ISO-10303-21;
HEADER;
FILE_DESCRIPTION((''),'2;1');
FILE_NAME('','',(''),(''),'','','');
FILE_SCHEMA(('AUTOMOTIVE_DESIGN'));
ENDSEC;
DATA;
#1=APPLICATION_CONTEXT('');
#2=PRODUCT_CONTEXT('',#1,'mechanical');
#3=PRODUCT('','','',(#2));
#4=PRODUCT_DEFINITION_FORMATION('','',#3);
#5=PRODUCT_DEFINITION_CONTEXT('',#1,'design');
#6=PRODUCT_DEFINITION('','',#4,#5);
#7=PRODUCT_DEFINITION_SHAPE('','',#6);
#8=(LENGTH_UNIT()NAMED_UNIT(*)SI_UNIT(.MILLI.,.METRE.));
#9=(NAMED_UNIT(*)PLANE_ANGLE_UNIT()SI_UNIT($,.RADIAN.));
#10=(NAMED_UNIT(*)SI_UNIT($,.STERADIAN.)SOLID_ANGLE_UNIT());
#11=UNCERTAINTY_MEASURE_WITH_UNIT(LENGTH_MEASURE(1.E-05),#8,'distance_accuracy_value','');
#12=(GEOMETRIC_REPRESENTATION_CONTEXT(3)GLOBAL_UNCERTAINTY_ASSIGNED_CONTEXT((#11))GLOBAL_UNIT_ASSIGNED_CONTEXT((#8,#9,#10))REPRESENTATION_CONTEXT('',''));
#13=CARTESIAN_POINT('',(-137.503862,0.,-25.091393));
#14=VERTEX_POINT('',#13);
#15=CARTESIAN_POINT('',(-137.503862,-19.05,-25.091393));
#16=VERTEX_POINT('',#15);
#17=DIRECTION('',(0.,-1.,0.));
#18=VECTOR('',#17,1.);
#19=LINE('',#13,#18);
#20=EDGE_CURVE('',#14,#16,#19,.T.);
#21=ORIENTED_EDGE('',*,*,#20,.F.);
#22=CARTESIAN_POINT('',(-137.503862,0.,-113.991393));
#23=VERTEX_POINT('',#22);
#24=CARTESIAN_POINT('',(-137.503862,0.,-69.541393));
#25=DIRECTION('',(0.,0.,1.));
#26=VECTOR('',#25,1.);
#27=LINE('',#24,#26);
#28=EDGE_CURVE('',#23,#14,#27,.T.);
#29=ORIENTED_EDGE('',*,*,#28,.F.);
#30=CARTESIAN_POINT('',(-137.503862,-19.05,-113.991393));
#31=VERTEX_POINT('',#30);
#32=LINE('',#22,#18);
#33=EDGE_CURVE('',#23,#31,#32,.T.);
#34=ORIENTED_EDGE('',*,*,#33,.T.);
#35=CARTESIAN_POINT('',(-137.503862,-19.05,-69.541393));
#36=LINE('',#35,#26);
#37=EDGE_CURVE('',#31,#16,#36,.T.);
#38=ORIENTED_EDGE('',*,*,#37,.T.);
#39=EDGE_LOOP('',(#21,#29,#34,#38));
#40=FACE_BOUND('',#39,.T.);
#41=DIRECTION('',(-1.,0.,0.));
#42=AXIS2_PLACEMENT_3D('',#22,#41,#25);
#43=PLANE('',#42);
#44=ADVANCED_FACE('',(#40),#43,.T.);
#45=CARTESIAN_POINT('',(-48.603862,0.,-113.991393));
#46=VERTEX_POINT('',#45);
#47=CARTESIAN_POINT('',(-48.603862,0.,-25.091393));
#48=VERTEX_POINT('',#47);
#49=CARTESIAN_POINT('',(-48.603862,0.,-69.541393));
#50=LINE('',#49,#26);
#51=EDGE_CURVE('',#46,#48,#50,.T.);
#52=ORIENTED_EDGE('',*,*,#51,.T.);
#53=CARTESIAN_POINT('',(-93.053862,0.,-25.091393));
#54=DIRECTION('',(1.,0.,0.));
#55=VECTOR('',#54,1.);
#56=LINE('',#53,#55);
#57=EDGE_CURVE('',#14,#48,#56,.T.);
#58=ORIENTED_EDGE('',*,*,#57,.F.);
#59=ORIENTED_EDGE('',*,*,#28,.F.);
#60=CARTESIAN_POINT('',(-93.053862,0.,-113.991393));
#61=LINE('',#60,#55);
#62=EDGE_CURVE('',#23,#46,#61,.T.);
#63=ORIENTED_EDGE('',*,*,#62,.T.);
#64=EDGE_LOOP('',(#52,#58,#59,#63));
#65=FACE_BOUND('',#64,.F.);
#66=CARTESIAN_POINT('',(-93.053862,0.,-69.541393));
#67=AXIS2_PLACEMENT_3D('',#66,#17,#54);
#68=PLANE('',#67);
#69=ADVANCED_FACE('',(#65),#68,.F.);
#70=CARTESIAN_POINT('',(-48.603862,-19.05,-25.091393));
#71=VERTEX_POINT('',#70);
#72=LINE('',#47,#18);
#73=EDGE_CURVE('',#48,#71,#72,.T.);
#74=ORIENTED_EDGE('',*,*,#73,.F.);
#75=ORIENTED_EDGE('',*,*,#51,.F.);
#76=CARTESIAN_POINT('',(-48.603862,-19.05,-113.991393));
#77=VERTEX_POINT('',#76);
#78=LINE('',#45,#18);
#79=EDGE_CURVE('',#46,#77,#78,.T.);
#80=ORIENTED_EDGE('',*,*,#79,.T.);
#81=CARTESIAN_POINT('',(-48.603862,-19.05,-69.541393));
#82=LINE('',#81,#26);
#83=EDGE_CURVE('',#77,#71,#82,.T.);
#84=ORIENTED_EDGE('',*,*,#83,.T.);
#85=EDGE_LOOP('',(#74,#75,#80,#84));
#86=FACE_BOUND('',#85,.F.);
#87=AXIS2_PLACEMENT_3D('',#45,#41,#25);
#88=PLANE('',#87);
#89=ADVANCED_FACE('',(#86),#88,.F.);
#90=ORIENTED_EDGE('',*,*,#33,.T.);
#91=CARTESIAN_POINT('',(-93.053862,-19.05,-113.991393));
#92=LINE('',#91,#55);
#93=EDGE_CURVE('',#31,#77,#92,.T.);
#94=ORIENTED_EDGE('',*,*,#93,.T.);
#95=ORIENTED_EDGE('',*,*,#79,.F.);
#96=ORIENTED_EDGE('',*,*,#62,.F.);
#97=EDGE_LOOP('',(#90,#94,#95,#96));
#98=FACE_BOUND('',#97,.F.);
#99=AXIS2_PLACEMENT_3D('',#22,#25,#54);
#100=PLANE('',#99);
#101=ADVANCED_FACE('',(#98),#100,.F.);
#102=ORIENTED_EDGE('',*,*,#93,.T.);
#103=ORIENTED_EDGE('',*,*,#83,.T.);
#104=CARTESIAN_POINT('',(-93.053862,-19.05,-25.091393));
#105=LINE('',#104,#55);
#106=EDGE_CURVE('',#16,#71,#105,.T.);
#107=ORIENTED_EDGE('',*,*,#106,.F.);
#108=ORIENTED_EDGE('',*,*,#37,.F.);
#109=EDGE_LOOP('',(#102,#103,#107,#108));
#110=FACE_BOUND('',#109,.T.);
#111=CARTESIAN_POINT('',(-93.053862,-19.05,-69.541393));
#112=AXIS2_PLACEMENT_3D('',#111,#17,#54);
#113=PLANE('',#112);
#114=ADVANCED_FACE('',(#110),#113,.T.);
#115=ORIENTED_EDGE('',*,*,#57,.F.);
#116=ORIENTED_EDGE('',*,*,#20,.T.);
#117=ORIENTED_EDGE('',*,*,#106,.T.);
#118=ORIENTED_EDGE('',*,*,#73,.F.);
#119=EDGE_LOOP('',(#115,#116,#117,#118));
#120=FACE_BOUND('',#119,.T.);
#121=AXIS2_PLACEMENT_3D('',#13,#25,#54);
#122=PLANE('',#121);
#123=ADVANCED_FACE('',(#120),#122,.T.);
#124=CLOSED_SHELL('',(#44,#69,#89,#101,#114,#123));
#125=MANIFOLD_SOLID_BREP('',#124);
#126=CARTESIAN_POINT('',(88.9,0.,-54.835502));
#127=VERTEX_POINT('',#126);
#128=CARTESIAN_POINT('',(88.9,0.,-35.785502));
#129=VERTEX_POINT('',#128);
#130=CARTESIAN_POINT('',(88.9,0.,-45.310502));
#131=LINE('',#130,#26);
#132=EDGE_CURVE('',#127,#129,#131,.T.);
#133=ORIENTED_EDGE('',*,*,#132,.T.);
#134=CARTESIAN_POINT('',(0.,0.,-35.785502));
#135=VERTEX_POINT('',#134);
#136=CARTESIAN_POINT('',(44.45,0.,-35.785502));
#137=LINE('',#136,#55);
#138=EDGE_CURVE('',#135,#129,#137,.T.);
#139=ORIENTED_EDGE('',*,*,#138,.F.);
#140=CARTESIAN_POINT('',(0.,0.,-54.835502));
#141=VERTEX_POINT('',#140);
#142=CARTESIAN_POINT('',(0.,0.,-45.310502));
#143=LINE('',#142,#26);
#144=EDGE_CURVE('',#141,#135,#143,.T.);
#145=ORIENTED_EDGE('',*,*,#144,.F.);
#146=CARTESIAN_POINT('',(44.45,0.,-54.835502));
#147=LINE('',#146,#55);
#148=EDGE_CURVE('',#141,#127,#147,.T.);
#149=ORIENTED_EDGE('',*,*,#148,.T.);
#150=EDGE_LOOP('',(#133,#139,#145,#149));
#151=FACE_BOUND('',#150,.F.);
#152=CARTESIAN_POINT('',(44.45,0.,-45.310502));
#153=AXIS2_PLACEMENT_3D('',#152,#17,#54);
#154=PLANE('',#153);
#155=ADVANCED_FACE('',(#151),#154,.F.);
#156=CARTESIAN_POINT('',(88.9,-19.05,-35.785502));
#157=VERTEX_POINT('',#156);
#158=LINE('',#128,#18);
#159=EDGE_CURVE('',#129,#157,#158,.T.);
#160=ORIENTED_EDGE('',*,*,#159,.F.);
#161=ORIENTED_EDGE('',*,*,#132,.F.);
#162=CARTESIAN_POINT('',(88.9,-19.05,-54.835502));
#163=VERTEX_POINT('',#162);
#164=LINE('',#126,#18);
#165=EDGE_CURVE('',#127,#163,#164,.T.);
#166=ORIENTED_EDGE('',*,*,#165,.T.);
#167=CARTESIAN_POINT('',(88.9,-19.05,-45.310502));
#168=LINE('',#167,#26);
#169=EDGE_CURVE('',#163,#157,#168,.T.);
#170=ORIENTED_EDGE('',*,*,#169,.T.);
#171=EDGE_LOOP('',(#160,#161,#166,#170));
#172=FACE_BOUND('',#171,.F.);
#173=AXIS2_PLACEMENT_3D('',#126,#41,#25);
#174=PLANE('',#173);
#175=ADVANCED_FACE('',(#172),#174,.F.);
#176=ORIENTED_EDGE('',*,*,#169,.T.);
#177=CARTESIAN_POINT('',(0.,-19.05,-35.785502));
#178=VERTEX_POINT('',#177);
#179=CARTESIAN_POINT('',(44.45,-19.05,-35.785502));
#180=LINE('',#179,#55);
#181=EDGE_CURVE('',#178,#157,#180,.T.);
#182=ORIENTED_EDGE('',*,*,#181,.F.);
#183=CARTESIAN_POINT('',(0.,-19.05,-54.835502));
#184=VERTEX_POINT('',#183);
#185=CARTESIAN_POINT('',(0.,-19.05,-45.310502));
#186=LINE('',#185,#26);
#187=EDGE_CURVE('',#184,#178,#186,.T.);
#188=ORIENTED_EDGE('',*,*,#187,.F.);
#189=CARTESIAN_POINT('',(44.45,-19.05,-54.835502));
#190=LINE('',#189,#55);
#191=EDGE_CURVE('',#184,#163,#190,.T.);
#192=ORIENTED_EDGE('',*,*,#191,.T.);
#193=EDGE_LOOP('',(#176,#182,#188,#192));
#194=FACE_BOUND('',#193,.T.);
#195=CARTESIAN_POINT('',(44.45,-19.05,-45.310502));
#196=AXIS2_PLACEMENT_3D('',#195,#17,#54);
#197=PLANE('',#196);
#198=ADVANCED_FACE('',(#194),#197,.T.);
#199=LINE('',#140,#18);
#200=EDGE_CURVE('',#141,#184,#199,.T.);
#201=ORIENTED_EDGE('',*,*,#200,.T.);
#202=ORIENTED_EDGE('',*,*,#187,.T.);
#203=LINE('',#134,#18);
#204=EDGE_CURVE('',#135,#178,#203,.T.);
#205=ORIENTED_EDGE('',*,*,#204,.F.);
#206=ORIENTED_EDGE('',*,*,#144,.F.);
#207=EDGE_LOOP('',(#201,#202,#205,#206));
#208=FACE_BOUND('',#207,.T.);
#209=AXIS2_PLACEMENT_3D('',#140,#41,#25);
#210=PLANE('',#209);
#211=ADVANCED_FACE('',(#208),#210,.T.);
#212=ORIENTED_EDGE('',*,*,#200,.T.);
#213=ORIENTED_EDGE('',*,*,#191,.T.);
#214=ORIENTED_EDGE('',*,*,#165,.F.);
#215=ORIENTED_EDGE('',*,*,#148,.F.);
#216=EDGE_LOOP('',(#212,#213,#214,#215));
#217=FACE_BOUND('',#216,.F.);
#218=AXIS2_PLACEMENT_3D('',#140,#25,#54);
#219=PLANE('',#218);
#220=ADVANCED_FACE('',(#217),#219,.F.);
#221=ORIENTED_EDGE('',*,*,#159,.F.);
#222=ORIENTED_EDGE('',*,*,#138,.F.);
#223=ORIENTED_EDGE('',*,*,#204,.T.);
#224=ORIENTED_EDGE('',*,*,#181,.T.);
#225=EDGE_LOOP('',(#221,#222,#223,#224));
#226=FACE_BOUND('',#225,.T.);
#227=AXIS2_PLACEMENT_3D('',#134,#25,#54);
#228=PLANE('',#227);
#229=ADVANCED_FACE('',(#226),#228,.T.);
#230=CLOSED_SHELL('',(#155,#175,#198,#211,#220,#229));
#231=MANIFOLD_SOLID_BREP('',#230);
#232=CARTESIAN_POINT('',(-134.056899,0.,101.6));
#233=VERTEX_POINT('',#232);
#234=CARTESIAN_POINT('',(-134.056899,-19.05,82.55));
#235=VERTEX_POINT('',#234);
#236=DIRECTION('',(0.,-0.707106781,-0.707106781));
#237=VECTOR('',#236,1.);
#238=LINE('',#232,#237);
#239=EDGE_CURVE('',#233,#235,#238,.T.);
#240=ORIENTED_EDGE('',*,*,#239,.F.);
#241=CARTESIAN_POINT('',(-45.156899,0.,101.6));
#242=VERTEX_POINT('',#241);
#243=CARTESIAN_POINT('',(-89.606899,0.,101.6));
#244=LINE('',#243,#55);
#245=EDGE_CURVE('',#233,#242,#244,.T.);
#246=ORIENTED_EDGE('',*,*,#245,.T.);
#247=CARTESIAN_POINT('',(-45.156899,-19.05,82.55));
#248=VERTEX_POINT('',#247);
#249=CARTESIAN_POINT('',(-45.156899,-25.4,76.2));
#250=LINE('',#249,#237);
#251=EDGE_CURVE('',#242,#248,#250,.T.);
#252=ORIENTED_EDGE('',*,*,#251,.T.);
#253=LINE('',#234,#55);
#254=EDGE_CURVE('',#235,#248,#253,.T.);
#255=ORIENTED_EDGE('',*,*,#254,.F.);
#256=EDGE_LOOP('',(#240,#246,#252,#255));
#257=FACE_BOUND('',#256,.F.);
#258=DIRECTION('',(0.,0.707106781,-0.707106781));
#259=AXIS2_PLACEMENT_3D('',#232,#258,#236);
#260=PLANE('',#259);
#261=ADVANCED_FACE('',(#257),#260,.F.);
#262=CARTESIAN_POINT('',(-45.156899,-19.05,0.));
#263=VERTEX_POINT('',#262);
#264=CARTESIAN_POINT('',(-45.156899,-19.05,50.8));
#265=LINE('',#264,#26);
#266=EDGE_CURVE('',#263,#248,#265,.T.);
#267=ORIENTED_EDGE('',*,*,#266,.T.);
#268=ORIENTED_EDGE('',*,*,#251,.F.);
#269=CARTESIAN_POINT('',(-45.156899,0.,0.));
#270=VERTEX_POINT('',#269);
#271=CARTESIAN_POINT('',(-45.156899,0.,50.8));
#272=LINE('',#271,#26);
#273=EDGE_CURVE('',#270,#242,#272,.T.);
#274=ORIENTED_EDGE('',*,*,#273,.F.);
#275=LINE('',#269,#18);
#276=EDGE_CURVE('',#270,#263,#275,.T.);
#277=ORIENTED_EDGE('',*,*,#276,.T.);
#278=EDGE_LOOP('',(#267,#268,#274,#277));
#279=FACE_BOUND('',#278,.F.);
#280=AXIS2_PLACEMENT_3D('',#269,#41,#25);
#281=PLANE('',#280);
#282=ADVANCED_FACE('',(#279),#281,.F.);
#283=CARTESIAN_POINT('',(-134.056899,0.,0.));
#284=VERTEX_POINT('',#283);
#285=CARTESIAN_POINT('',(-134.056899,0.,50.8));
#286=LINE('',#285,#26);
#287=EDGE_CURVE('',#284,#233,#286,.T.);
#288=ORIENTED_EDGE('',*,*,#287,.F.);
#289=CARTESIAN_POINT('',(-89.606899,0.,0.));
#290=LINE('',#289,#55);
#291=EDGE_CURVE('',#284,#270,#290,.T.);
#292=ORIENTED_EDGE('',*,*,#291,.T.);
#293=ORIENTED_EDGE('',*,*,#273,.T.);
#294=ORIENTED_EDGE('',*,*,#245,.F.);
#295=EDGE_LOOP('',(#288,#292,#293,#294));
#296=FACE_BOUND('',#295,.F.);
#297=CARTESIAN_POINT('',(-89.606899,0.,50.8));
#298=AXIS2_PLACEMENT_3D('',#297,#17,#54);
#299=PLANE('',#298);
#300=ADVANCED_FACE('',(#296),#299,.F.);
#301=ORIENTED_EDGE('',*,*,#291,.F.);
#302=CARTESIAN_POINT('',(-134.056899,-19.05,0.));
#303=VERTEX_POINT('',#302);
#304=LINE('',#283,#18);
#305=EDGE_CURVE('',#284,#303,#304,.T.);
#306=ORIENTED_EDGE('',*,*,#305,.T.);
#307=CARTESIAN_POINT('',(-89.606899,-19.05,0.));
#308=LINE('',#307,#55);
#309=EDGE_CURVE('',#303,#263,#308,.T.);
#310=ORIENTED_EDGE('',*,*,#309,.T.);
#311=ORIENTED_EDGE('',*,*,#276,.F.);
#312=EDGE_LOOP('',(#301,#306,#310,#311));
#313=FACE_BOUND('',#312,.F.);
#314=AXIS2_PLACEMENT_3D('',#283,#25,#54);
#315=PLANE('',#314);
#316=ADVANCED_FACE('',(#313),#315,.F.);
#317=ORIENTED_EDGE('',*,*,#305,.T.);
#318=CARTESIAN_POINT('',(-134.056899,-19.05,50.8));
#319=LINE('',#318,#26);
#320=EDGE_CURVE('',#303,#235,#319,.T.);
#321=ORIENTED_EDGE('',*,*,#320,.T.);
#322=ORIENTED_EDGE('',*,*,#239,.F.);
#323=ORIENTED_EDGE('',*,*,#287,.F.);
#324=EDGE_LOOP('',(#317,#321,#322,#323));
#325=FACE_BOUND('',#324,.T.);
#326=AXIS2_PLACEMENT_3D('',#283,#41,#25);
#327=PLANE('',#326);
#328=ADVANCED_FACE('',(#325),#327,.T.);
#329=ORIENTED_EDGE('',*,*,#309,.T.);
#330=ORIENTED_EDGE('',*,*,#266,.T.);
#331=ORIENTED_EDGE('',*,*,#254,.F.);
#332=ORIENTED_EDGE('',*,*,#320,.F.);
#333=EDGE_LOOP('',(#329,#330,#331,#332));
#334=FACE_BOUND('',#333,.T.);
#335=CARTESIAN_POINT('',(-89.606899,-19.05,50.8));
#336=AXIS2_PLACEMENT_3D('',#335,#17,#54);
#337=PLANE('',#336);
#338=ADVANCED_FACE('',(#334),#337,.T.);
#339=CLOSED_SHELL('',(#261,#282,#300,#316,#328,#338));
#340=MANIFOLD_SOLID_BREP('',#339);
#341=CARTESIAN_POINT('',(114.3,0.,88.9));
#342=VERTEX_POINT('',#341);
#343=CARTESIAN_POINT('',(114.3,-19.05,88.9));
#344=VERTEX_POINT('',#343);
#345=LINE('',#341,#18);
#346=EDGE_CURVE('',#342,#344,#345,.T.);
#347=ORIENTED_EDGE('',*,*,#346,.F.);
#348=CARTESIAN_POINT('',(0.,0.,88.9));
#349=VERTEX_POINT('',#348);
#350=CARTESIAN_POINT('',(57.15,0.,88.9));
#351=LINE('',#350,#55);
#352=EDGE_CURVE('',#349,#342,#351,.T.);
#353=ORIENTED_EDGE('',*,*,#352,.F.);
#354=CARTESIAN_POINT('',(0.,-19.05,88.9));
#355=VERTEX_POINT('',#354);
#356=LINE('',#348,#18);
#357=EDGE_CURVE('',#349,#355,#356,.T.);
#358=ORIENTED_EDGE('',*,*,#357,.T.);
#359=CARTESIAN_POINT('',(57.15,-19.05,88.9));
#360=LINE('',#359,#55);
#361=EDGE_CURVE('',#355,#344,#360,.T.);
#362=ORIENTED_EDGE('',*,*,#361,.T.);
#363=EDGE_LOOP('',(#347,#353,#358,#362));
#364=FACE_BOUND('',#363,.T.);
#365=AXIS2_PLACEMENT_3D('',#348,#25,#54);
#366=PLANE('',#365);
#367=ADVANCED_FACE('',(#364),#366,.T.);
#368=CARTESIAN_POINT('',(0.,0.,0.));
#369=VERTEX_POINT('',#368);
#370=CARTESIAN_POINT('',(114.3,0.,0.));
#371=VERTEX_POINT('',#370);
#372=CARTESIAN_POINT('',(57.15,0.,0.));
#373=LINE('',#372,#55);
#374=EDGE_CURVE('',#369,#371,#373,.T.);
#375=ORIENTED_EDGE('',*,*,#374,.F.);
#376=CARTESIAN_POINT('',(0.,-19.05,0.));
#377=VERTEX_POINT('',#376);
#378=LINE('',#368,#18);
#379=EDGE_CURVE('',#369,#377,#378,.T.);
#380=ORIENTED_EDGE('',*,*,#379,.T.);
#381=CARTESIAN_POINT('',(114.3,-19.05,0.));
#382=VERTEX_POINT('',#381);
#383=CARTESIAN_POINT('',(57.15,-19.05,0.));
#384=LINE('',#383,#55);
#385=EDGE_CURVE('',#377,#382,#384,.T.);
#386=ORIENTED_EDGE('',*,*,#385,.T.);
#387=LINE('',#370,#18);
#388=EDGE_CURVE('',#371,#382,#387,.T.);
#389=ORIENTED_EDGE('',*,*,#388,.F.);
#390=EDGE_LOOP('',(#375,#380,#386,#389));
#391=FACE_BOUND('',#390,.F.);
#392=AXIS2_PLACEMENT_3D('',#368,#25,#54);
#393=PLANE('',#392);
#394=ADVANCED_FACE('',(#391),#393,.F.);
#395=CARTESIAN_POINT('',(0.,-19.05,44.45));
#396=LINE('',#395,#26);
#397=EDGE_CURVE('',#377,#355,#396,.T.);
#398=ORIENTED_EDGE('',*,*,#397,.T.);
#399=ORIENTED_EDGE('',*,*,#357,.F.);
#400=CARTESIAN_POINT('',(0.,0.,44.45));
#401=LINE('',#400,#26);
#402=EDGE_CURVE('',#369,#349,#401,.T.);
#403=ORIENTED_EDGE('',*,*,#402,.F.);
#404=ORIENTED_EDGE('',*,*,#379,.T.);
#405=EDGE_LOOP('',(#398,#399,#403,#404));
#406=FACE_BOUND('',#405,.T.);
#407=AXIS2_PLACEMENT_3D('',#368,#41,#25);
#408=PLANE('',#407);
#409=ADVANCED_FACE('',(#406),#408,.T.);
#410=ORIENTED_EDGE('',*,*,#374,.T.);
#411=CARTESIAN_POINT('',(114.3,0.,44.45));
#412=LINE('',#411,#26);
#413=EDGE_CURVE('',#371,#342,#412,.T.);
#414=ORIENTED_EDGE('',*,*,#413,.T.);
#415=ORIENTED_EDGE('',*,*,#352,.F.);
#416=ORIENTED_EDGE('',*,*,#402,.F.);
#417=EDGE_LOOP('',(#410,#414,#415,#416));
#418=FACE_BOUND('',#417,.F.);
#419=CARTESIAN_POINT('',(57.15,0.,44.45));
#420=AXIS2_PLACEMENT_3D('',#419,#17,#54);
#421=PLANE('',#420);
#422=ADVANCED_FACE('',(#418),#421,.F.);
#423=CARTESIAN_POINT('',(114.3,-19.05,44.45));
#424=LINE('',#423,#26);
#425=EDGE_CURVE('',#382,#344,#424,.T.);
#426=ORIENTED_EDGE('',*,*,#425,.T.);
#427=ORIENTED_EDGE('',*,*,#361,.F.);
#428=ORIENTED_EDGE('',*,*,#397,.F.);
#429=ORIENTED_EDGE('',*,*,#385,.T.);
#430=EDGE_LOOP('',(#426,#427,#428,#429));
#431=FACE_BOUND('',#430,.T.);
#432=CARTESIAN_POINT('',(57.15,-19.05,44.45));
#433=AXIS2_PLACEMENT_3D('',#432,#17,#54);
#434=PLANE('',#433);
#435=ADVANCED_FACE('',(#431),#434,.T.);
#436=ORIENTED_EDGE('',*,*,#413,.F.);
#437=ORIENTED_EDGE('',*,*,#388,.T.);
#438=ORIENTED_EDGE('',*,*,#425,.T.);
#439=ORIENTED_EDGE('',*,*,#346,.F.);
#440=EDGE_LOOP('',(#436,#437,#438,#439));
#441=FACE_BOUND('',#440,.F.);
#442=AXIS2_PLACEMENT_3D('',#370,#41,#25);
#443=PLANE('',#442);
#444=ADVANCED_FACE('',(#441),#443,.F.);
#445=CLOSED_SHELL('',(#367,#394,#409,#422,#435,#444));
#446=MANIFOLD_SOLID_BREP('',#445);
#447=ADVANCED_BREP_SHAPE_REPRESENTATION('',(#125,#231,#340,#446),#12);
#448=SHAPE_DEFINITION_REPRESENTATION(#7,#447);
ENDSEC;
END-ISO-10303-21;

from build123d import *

# Parameters (mm, degrees)
F0_W     = 114.3
F0_H     = 88.9
F1_DEPTH = 19.05
F2_W     = 88.9
F2_H     = 19.05
F3_DEPTH = 19.05
F4_W     = 88.9
F4_H     = 101.6
F5_DEPTH = 19.05
F7_DEPTH = 248.3578988337
F8_W     = 88.9
F8_H     = 88.9
F9_DEPTH = 19.05


with BuildPart() as f1:
    # F0 (on Front) → F1 (new body)
    with BuildSketch(Plane.XZ):
        with Locations((57.15, 44.45)):
            Rectangle(F0_W, F0_H)
    extrude(amount=F1_DEPTH)


with BuildPart() as f3:
    # F2 (on Front) → F3 (new body)
    with BuildSketch(Plane.XZ):
        with Locations((44.45, -45.3105017608)):
            Rectangle(F2_W, F2_H)
    extrude(amount=F3_DEPTH)


with BuildPart() as f5:
    # F4 (on Front) → F5 (new body)
    with BuildSketch(Plane.XZ):
        with Locations((-89.6068988337, 50.8)):
            Rectangle(F4_W, F4_H)
    extrude(amount=F5_DEPTH)

    # F6 (on face) → F7 (cut, through all)
    with BuildSketch(Plane(origin=(-134.0568988337, 0, 0), x_dir=(0, -1, 0), z_dir=(-1, 0, 0))):
        Polygon((19.05, 101.6), (0, 101.6), (19.05, 82.55), align=None)
    extrude(amount=-F7_DEPTH, mode=Mode.SUBTRACT)


with BuildPart() as f9:
    # F8 (on Front) → F9 (new body)
    with BuildSketch(Plane.XZ):
        with Locations((-93.0538623974, -69.5413928479)):
            Rectangle(F8_W, F8_H)
    extrude(amount=F9_DEPTH)


solid = Compound([f1.part, f3.part, f5.part, f9.part])
